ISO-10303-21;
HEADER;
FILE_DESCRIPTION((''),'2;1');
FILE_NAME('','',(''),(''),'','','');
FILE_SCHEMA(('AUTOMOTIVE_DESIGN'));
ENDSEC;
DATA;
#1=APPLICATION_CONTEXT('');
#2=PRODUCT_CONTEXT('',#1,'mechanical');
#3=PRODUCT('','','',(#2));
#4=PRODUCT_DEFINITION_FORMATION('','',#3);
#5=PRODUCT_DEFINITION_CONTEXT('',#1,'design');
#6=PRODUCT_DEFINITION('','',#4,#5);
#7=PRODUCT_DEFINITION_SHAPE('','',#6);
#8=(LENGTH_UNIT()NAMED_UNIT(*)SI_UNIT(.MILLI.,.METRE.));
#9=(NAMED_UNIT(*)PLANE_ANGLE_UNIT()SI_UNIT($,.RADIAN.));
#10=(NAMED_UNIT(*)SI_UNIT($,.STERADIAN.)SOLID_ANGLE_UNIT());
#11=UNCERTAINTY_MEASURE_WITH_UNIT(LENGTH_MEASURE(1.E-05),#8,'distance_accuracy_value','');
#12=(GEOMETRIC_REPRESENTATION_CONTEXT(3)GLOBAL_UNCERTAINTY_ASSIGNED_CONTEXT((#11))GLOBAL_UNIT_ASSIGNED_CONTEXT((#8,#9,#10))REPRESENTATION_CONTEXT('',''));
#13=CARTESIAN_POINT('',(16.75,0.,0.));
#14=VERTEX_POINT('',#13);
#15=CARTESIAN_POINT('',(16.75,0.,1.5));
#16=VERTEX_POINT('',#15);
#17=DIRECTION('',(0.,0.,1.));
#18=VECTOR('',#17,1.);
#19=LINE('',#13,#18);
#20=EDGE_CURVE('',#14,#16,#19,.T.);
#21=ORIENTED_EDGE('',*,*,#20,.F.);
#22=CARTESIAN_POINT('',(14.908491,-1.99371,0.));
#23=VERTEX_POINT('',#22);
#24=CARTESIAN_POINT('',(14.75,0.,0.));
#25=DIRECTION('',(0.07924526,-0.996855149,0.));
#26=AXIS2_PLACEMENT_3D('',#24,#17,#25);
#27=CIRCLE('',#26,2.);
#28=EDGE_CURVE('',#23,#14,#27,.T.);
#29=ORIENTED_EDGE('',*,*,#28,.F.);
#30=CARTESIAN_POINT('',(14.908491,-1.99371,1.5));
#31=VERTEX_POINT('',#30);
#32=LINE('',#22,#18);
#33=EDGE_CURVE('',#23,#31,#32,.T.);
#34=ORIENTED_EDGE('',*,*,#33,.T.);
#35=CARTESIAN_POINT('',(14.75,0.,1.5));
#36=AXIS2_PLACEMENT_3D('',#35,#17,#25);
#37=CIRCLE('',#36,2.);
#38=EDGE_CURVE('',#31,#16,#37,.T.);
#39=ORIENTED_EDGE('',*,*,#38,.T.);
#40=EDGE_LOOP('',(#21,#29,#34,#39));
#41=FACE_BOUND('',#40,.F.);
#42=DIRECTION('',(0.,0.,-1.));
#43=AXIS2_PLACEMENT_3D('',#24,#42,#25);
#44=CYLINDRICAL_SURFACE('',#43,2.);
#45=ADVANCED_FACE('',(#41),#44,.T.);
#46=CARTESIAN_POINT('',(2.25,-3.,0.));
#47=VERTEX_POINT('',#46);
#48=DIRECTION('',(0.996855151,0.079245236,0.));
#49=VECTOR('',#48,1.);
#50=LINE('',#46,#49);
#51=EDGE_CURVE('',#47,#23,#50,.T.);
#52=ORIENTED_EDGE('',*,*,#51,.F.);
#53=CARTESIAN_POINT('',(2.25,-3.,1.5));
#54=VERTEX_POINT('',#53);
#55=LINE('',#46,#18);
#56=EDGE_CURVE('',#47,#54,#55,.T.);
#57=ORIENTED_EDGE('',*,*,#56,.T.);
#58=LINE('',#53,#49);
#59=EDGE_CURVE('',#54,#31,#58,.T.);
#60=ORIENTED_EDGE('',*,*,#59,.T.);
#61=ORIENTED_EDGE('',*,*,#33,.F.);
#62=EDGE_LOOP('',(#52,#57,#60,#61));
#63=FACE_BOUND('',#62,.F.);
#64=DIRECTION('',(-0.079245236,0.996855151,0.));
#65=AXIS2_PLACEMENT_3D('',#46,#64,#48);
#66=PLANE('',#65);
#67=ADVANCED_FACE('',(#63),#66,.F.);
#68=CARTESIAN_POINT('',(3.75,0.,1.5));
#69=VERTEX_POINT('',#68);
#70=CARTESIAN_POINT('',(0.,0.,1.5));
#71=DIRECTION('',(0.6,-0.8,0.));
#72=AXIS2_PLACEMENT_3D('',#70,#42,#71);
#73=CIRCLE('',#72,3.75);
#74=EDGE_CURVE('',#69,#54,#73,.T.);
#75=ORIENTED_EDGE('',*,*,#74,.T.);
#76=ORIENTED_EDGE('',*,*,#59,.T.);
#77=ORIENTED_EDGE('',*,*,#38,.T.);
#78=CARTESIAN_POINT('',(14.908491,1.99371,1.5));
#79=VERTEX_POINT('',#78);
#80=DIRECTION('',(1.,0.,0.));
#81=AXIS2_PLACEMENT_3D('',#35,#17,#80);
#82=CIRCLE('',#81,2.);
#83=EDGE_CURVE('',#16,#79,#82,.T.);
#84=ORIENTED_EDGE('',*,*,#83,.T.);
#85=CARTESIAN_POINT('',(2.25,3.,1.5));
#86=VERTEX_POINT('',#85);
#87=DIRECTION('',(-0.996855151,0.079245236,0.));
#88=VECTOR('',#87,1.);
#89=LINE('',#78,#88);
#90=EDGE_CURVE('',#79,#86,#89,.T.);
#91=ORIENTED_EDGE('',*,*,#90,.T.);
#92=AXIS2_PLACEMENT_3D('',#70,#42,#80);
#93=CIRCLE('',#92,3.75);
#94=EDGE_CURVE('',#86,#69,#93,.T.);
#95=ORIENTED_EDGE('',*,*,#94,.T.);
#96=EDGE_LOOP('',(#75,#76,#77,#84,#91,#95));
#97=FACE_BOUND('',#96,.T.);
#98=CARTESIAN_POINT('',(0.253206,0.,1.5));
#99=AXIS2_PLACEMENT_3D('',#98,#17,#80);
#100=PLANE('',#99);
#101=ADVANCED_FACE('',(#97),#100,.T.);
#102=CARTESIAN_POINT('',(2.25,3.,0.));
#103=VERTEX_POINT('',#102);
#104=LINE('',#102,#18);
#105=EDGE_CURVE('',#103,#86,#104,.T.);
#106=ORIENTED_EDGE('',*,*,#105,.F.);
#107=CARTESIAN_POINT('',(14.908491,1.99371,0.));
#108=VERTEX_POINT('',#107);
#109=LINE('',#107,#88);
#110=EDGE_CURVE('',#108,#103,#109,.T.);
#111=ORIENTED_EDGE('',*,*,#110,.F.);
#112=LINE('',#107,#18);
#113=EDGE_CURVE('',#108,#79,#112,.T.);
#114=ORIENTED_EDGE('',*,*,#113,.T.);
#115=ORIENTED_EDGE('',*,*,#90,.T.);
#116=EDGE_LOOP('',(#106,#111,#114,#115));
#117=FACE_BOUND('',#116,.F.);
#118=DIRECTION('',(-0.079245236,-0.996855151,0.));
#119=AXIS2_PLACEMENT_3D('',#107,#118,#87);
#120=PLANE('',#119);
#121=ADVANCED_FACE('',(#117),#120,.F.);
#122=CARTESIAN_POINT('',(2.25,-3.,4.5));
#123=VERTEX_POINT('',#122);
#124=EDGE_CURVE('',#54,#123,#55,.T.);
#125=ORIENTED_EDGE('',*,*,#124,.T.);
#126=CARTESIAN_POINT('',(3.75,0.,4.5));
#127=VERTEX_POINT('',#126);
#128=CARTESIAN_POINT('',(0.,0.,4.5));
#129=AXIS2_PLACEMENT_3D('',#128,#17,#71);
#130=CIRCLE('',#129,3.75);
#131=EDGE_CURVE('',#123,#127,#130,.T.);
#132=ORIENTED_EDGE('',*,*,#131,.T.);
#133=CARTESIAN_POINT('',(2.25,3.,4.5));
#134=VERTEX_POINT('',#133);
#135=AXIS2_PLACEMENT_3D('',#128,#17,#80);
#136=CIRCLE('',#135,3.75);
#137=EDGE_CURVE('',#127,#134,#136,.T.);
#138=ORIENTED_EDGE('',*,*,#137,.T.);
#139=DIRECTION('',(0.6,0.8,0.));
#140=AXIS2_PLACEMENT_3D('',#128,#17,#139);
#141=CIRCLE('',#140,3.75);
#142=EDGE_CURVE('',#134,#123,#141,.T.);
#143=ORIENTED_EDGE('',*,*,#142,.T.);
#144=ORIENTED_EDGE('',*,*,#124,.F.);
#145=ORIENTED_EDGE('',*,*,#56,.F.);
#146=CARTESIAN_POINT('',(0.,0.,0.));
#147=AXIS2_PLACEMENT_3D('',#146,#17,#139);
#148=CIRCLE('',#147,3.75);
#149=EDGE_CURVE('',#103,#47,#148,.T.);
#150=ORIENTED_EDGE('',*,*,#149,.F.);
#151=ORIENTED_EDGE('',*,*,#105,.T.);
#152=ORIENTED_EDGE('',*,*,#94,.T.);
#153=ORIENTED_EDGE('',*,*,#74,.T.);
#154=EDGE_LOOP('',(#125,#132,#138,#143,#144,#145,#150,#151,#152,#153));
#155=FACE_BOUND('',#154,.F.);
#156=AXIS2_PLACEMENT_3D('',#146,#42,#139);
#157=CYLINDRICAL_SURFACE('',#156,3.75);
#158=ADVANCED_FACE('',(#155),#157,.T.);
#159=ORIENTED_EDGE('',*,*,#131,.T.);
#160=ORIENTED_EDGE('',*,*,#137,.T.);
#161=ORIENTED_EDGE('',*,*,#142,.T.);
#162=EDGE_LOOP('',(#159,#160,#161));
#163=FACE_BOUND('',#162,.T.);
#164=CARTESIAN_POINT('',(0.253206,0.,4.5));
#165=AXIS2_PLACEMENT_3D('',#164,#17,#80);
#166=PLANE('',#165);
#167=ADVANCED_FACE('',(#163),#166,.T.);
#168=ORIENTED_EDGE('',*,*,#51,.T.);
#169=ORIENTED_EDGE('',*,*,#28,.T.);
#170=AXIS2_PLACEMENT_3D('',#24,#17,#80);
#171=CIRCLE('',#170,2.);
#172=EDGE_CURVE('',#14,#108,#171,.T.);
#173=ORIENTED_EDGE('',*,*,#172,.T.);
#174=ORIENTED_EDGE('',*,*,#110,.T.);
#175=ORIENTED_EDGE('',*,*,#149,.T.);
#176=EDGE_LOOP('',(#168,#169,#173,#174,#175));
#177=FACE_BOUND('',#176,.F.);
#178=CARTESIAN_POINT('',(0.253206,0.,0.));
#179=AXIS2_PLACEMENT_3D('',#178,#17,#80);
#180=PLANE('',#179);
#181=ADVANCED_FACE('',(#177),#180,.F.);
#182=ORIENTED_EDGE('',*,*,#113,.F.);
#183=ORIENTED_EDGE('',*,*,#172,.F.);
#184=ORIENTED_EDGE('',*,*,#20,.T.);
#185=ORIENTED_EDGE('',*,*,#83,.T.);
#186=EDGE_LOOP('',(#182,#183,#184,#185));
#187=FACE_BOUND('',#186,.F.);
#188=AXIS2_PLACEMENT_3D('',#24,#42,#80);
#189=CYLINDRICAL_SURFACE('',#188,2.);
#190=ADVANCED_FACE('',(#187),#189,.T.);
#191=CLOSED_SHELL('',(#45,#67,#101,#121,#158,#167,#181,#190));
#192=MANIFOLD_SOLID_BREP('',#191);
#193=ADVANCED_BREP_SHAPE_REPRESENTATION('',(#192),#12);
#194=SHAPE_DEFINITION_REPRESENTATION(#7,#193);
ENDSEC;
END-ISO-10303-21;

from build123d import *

# Parameters (mm, degrees)
F1_DEPTH = 1.5
F2_DEPTH = 4.5


# Not quite as in the source:
# - a feature names something its author has since deleted; it is built from what else it names


with BuildPart() as f1:
    # F0 (on Top) → F1 (new body)
    with BuildSketch(Plane.XY):
        with BuildLine():
            ThreePointArc((2.25, -3), (3.3541019662, -1.6770509831), (3.75, 0))
            ThreePointArc((3.75, 0), (3.3541019662, 1.6770509831), (2.25, 3))
            ThreePointArc((2.25, 3), (-3.75, 0), (2.25, -3))
        make_face()
        with BuildLine():
            ThreePointArc((16.75, 0), (16.2191802202, 1.3570222845), (14.9084905194, 1.9937102987))
            ThreePointArc((14.9084905194, 1.9937102987), (12.75, 0), (14.9084905194, -1.9937102987))
            ThreePointArc((14.9084905194, -1.9937102987), (16.2191802202, -1.3570222845), (16.75, 0))
        make_face()
        with BuildLine():
            ThreePointArc((2.25, 3), (3.3541019662, 1.6770509831), (3.75, 0))
            ThreePointArc((3.75, 0), (3.3541019662, -1.6770509831), (2.25, -3))
            Line((2.25, -3), (14.9084905194, -1.9937102987))
            ThreePointArc((14.9084905194, -1.9937102987), (12.75, 0), (14.9084905194, 1.9937102987))
            Line((14.9084905194, 1.9937102987), (2.25, 3))
        make_face()
    extrude(amount=F1_DEPTH)

    # F0 (on Top) → F2 (join)
    with BuildSketch(Plane.XY):
        with BuildLine():
            ThreePointArc((2.25, -3), (3.3541019662, -1.6770509831), (3.75, 0))
            ThreePointArc((3.75, 0), (3.3541019662, 1.6770509831), (2.25, 3))
            ThreePointArc((2.25, 3), (-3.75, 0), (2.25, -3))
        make_face()
    extrude(amount=F2_DEPTH)


solid = f1.part
